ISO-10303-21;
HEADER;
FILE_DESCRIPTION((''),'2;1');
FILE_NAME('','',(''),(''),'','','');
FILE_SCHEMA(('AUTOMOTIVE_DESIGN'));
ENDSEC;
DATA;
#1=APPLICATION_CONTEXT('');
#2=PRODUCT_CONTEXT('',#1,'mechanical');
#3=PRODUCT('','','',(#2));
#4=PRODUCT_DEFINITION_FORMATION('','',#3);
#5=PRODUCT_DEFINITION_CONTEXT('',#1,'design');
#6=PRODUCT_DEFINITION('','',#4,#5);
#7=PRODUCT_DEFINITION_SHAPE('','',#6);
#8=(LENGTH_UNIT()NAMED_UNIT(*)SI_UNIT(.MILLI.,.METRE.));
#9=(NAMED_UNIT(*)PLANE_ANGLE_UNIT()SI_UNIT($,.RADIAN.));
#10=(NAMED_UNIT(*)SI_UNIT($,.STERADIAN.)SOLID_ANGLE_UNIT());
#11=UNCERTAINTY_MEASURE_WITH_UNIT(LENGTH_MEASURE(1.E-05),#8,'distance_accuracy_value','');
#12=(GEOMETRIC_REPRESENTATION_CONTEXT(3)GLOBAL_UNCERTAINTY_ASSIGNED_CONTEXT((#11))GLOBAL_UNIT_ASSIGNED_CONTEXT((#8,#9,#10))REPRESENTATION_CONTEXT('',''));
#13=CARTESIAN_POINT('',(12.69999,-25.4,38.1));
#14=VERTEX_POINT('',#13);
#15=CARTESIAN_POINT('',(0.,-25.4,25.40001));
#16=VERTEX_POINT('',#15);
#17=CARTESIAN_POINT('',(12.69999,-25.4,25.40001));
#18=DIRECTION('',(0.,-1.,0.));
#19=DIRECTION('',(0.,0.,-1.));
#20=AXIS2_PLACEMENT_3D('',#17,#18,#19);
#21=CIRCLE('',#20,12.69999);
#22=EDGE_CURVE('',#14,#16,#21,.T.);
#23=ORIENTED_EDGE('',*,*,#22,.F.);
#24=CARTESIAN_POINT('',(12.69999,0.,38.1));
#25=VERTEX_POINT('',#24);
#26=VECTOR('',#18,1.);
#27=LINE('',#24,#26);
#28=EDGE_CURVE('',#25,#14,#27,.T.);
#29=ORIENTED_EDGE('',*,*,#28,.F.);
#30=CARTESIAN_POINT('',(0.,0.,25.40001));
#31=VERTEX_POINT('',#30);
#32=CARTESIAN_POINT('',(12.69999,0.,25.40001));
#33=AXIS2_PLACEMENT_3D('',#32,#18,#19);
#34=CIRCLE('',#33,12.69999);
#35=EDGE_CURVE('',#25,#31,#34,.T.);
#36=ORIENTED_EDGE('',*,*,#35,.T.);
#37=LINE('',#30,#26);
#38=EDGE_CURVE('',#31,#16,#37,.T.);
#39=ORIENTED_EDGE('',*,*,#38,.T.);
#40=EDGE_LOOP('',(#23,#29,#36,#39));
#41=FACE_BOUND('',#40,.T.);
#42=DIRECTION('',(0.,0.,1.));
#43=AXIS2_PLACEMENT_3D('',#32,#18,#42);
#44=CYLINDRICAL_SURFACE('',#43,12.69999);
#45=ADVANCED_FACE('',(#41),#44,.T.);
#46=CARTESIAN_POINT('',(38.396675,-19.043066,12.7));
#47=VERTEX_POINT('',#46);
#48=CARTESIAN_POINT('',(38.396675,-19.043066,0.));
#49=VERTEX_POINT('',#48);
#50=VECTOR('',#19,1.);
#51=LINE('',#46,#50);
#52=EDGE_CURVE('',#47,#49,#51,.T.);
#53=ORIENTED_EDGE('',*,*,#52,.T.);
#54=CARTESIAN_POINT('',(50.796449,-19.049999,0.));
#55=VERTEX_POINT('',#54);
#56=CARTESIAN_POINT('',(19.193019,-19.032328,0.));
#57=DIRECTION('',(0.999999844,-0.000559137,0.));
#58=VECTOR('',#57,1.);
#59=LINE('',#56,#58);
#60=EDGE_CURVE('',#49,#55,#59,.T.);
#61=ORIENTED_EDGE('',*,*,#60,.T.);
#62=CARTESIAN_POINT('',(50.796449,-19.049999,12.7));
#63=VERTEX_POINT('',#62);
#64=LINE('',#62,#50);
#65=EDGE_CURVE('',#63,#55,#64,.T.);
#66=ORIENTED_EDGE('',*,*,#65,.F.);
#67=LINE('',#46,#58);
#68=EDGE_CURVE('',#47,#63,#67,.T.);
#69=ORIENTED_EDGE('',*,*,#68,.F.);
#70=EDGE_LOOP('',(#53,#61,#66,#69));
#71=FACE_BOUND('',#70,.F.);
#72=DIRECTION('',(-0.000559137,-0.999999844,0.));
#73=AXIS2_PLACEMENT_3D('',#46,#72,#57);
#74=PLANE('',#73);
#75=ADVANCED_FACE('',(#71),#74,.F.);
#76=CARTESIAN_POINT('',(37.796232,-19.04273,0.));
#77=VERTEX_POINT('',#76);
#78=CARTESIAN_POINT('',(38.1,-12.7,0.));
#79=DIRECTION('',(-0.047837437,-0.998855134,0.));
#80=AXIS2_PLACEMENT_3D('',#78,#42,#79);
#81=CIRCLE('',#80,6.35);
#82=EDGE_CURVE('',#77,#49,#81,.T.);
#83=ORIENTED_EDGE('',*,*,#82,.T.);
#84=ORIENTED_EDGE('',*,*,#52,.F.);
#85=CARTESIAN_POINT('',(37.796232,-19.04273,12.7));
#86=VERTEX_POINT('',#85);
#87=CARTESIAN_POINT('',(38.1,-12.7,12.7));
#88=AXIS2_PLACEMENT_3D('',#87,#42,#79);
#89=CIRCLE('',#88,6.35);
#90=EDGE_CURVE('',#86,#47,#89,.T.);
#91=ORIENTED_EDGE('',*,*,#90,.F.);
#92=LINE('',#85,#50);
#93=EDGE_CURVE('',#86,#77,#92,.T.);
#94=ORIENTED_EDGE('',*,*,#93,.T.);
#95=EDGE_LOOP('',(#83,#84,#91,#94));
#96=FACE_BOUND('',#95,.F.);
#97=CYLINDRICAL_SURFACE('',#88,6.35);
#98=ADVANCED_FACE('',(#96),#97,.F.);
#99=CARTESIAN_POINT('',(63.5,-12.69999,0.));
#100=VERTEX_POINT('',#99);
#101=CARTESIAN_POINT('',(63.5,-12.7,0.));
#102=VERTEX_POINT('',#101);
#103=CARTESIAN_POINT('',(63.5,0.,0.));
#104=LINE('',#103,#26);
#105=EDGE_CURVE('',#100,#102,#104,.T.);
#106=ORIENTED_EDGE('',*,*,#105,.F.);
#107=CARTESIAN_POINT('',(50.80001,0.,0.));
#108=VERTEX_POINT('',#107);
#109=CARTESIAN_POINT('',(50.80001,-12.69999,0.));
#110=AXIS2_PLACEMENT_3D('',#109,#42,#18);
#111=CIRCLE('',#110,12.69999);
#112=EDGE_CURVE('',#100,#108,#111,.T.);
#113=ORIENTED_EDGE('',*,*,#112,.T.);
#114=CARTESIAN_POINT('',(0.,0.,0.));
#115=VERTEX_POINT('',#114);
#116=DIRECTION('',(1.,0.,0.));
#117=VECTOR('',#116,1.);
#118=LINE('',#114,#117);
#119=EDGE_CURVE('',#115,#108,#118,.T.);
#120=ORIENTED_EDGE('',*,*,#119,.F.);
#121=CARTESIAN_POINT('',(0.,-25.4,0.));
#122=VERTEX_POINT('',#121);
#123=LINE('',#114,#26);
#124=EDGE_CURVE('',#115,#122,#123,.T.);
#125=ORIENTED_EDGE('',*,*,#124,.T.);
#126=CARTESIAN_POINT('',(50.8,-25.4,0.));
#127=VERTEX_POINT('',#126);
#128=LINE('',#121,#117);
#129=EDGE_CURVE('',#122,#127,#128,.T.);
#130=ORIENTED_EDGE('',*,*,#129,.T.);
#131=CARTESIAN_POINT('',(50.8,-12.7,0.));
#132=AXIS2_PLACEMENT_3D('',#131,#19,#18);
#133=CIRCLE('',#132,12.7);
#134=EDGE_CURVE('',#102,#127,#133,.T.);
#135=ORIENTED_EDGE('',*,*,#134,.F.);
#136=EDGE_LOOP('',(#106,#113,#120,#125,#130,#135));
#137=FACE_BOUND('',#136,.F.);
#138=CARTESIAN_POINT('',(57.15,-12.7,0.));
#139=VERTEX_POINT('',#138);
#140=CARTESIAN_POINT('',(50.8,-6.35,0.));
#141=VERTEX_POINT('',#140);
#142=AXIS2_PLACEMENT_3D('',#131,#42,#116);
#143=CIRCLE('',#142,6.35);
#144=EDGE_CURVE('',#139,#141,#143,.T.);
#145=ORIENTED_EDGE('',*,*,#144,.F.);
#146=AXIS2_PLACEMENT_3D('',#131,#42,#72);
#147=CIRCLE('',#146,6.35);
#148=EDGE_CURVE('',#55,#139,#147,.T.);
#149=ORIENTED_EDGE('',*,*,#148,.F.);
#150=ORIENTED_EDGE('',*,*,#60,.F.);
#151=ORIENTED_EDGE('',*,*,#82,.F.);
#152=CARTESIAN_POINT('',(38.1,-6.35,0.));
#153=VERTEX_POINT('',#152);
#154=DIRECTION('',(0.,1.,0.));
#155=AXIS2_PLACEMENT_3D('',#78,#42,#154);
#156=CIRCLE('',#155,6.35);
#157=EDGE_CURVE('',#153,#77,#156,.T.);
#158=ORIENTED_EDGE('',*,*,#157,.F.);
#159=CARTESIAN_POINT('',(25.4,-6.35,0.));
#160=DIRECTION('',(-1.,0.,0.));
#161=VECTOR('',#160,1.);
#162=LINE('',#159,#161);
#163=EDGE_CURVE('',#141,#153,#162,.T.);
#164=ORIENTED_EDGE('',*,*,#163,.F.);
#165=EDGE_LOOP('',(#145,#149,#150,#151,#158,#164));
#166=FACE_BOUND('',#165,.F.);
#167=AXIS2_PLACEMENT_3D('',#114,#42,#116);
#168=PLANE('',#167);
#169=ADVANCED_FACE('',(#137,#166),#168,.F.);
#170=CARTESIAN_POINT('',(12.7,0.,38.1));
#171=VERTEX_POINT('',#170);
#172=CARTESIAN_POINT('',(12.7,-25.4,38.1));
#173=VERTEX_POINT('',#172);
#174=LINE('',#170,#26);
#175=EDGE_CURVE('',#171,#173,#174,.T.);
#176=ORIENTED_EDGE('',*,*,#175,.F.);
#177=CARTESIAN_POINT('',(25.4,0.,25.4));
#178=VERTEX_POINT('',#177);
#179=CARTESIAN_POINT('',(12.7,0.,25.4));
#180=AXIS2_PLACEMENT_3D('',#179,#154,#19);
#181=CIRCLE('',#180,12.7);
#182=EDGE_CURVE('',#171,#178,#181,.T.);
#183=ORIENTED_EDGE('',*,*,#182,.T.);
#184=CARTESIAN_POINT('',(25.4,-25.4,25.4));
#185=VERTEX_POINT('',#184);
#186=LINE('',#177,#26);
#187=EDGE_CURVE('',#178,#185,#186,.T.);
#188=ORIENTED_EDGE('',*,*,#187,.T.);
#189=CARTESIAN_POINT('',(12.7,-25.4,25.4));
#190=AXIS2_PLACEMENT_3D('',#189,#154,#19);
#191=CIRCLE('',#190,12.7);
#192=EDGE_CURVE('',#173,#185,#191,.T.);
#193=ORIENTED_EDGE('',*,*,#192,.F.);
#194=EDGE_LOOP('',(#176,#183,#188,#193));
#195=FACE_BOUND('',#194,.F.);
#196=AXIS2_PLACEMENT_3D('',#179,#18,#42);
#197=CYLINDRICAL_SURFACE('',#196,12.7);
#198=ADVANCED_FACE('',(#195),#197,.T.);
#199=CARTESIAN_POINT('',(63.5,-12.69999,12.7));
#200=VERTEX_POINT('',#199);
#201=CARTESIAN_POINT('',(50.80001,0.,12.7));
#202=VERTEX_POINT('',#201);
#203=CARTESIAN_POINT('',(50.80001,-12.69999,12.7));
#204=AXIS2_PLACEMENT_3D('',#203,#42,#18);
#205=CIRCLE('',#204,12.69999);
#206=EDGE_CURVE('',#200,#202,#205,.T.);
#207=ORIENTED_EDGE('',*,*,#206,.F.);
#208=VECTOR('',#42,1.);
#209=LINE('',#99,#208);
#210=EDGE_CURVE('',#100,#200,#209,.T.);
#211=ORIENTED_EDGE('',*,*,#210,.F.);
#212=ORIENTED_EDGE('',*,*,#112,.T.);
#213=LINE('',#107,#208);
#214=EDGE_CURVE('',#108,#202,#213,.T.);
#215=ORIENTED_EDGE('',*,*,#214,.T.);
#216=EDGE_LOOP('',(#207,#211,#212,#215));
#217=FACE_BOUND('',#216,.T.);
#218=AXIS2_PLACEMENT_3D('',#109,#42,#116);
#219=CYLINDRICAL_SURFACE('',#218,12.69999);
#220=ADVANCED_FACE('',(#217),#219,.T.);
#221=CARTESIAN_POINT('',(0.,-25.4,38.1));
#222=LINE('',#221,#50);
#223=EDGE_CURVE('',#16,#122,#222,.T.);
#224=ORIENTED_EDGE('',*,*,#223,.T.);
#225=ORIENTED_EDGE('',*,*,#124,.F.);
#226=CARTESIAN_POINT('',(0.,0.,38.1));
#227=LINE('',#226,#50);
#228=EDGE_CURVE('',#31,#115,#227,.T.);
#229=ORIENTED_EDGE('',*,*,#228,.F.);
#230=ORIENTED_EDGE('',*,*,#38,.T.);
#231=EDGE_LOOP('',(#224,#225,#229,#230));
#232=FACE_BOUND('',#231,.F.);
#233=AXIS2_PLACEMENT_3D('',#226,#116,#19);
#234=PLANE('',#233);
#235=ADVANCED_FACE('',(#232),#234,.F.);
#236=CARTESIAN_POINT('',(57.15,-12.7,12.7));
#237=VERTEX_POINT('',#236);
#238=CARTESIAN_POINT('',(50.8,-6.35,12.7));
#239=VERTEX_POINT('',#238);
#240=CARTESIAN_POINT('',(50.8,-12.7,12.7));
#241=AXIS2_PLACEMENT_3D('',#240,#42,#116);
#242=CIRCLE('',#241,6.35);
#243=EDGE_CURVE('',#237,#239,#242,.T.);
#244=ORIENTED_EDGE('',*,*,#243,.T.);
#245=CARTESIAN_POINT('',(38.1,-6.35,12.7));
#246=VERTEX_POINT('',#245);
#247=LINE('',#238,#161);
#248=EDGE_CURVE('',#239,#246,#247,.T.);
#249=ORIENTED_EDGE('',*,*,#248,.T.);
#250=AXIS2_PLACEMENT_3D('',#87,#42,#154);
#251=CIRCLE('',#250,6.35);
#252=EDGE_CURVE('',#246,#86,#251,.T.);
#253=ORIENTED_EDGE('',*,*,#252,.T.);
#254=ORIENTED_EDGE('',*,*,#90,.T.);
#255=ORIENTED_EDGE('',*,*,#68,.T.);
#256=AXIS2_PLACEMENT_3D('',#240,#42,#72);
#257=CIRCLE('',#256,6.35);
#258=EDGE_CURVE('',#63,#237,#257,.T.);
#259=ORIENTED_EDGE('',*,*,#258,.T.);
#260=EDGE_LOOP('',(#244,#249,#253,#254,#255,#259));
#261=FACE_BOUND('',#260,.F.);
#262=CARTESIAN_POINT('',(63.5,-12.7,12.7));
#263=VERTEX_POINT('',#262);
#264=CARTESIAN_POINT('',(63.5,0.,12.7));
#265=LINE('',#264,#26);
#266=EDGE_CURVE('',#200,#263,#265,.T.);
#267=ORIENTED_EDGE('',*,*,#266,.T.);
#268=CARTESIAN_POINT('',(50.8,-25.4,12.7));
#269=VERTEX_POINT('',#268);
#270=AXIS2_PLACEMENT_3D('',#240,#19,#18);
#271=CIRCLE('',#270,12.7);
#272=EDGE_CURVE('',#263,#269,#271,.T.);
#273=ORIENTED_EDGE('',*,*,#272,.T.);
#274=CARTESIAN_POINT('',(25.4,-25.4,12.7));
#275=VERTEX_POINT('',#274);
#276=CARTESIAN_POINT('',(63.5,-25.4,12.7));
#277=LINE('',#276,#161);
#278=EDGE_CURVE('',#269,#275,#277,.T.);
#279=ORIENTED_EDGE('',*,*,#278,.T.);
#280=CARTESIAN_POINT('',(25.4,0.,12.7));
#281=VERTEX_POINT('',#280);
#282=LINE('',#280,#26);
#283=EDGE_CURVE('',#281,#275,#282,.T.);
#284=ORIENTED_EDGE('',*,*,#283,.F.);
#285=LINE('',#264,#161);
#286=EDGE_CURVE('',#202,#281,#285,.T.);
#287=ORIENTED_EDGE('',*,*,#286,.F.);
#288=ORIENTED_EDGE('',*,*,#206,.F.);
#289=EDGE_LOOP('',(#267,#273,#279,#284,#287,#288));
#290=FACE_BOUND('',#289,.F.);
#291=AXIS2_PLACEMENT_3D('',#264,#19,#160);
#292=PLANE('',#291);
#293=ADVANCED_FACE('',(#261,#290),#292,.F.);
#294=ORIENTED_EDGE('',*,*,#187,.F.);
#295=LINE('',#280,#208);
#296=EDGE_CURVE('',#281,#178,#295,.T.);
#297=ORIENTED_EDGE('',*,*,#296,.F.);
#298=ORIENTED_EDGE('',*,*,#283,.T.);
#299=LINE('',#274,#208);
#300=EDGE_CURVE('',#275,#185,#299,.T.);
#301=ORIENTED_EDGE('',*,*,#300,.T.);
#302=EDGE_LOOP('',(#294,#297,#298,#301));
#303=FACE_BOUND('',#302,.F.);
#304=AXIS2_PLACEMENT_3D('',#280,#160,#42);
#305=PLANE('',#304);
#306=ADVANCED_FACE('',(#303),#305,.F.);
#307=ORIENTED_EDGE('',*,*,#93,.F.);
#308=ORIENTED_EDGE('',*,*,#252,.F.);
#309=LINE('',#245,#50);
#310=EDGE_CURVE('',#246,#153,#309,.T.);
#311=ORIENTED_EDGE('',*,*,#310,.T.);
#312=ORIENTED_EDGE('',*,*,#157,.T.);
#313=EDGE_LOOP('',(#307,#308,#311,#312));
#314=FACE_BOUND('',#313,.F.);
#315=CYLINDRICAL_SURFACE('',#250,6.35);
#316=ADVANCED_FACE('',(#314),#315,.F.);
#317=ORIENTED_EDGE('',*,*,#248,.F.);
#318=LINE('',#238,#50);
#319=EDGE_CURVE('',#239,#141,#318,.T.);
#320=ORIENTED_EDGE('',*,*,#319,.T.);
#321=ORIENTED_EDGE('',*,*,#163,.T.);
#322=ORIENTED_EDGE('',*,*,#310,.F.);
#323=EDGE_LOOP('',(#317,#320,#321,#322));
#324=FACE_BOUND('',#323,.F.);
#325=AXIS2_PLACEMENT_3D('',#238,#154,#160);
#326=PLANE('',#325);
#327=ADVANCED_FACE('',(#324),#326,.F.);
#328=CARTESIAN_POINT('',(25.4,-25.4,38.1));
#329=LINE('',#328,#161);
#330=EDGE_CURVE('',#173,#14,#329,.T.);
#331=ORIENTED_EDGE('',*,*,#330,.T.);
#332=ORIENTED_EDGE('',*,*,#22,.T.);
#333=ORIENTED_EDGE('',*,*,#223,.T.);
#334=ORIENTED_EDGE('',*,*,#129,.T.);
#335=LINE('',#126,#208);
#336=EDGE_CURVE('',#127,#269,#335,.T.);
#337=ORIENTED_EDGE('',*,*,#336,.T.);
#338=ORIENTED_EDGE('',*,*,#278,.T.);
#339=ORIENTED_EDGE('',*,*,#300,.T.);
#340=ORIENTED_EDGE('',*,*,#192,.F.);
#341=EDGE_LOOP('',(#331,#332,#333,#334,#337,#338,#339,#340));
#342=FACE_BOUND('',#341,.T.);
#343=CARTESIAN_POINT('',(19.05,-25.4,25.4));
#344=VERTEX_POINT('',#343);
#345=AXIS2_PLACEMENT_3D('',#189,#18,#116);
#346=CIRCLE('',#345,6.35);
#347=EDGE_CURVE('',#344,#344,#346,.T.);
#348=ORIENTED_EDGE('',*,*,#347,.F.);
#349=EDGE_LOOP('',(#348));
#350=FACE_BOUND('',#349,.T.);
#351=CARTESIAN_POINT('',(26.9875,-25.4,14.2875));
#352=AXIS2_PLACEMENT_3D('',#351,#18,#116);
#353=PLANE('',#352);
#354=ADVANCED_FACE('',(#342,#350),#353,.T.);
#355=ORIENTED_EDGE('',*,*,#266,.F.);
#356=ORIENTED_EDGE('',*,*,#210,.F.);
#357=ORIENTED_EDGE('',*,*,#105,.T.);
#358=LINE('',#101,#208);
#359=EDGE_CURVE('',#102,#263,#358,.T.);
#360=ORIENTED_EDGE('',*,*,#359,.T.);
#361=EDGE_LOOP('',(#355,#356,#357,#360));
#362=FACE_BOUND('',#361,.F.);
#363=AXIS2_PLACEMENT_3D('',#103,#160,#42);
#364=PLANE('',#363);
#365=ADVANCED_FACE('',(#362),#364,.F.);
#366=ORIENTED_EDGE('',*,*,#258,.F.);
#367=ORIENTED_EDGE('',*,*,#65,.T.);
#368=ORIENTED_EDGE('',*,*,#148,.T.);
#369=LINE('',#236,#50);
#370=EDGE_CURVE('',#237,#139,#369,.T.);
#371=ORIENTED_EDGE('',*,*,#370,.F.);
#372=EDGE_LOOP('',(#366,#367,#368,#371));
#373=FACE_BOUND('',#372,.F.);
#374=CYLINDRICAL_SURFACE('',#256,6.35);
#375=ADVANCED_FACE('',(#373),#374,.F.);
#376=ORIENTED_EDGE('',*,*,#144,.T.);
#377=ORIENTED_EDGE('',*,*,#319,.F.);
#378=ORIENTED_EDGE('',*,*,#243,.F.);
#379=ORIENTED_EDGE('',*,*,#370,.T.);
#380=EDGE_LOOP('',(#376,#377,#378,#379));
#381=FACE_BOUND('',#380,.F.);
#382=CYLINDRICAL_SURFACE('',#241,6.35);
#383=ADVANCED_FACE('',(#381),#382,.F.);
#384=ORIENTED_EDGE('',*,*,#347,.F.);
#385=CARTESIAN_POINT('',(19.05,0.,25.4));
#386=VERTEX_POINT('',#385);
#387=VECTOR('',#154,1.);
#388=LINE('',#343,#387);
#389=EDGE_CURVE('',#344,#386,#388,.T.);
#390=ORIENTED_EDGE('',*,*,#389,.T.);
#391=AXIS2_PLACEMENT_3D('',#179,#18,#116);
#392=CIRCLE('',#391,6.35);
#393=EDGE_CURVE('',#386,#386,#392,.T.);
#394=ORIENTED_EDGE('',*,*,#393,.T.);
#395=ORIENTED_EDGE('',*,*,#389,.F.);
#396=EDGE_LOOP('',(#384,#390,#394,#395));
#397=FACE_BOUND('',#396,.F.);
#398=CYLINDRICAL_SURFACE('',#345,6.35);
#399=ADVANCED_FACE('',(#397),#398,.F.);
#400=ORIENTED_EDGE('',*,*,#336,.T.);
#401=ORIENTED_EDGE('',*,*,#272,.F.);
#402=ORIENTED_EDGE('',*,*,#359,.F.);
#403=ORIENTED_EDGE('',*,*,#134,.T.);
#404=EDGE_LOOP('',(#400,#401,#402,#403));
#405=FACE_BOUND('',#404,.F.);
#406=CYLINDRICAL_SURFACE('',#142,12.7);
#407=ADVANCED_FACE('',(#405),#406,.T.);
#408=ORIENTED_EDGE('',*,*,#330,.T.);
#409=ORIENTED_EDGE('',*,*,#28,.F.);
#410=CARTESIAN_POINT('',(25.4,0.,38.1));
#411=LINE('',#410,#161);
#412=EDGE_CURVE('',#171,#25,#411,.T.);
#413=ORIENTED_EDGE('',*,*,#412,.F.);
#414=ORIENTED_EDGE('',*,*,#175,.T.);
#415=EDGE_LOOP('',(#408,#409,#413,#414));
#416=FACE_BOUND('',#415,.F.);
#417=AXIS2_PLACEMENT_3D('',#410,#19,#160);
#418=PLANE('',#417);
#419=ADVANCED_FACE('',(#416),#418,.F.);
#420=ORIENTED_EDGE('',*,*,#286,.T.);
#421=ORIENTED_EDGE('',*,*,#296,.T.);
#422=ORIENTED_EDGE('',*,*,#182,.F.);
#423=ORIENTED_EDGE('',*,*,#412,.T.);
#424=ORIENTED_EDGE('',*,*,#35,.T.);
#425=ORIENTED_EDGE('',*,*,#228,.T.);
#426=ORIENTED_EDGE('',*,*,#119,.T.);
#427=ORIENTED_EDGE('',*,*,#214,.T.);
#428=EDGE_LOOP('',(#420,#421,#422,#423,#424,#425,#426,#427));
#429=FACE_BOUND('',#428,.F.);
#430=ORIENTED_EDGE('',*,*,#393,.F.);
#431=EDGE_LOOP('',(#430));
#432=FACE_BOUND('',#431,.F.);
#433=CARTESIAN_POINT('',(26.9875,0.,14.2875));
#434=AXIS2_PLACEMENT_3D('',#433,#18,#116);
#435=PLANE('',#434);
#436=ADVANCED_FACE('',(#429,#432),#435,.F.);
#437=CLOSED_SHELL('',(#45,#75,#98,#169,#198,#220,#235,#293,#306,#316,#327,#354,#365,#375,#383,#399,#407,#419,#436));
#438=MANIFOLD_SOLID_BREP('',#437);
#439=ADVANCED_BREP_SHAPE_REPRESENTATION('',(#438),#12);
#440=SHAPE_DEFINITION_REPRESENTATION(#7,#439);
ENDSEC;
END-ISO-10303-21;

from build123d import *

# Parameters (mm, degrees)
F1_DEPTH = 25.4
F2_R     = 12.7
F3_R     = 12.69999
F4_R     = 12.7
F5_R     = 12.69999
F7_DEPTH = 25.4
F8_R     = 6.35
F9_DEPTH = 31.75


# Not quite as in the source:
# - a fillet or chamfer is up to 0.001 mm smaller than in the source, because OpenCascade refuses the exact size


with BuildPart() as f1:
    # F0 (on Front) → F1 (new body)
    with BuildSketch(Plane.XZ):
        Polygon((0, 38.1), (0, 0), (63.5, 0), (63.5, 12.7), (25.4, 12.7), (25.4, 38.1), align=None)
    extrude(amount=F1_DEPTH)

    # F2
    f2_edges = [f1.edges().sort_by_distance(p)[0] for p in [
        (63.5, -25.4, 6.35),
    ]]
    fillet(f2_edges, radius=F2_R)

    # F3 (radius 12.7 in the source; OpenCascade refuses exactly that, so slightly less here)
    f3_edges = [f1.edges().sort_by_distance(p)[0] for p in [
        (63.5, 0, 6.35),
    ]]
    fillet(f3_edges, radius=F3_R)

    # F4
    f4_edges = [f1.edges().sort_by_distance(p)[0] for p in [
        (25.4, -12.7, 38.1),
    ]]
    fillet(f4_edges, radius=F4_R)

    # F5 (radius 12.7 in the source; OpenCascade refuses exactly that, so slightly less here)
    f5_edges = [f1.edges().sort_by_distance(p)[0] for p in [
        (0, -12.7, 38.1),
    ]]
    fillet(f5_edges, radius=F5_R)

    # F6 (on face) → F7 (cut)
    with BuildSketch(Plane.XY.offset(12.7)):
        with BuildLine():
            ThreePointArc((38.3966746256, -19.0430658334), (42.6938210606, -17.0839831277), (44.45, -12.7))
            ThreePointArc((44.45, -12.7), (42.5901280605, -8.2098719395), (38.1, -6.35))
            ThreePointArc((38.1, -6.35), (31.7518177342, -12.5480726474), (37.7962322754, -19.0427301038))
            Line((37.7962322754, -19.0427301038), (38.3966746256, -19.0430658334))
        make_face()
        with BuildLine():
            ThreePointArc((50.79644948, -19.0499990074), (46.3086168165, -17.1888725866), (44.45, -12.7))
            ThreePointArc((44.45, -12.7), (42.6938210606, -17.0839831277), (38.3966746256, -19.0430658334))
            Line((38.3966746256, -19.0430658334), (50.79644948, -19.0499990074))
        make_face()
        with BuildLine():
            ThreePointArc((38.1, -6.35), (42.5901280605, -8.2098719395), (44.45, -12.7))
            ThreePointArc((44.45, -12.7), (46.3098719395, -8.2098719395), (50.8, -6.35))
            Line((50.8, -6.35), (38.1, -6.35))
        make_face()
        with BuildLine():
            ThreePointArc((50.8, -6.35), (46.3098719395, -8.2098719395), (44.45, -12.7))
            ThreePointArc((44.45, -12.7), (46.3086168165, -17.1888725866), (50.79644948, -19.0499990074))
            ThreePointArc((50.79644948, -19.0499990074), (55.2888725866, -17.1913831835), (57.15, -12.7))
            ThreePointArc((57.15, -12.7), (55.2901280605, -8.2098719395), (50.8, -6.35))
        make_face()
        with BuildLine():
            ThreePointArc((37.7962322754, -19.0427301038), (38.09644948, -19.0499990074), (38.3966746256, -19.0430658334))
            Line((38.3966746256, -19.0430658334), (37.7962322754, -19.0427301038))
        make_face()
    extrude(amount=-F7_DEPTH, mode=Mode.SUBTRACT)

    # F8 (on face) → F9 (cut)
    with BuildSketch(Plane.XZ.offset(25.4)):
        with Locations((12.7, 25.4)):
            Circle(F8_R)
    extrude(amount=-F9_DEPTH, mode=Mode.SUBTRACT)


solid = f1.part
